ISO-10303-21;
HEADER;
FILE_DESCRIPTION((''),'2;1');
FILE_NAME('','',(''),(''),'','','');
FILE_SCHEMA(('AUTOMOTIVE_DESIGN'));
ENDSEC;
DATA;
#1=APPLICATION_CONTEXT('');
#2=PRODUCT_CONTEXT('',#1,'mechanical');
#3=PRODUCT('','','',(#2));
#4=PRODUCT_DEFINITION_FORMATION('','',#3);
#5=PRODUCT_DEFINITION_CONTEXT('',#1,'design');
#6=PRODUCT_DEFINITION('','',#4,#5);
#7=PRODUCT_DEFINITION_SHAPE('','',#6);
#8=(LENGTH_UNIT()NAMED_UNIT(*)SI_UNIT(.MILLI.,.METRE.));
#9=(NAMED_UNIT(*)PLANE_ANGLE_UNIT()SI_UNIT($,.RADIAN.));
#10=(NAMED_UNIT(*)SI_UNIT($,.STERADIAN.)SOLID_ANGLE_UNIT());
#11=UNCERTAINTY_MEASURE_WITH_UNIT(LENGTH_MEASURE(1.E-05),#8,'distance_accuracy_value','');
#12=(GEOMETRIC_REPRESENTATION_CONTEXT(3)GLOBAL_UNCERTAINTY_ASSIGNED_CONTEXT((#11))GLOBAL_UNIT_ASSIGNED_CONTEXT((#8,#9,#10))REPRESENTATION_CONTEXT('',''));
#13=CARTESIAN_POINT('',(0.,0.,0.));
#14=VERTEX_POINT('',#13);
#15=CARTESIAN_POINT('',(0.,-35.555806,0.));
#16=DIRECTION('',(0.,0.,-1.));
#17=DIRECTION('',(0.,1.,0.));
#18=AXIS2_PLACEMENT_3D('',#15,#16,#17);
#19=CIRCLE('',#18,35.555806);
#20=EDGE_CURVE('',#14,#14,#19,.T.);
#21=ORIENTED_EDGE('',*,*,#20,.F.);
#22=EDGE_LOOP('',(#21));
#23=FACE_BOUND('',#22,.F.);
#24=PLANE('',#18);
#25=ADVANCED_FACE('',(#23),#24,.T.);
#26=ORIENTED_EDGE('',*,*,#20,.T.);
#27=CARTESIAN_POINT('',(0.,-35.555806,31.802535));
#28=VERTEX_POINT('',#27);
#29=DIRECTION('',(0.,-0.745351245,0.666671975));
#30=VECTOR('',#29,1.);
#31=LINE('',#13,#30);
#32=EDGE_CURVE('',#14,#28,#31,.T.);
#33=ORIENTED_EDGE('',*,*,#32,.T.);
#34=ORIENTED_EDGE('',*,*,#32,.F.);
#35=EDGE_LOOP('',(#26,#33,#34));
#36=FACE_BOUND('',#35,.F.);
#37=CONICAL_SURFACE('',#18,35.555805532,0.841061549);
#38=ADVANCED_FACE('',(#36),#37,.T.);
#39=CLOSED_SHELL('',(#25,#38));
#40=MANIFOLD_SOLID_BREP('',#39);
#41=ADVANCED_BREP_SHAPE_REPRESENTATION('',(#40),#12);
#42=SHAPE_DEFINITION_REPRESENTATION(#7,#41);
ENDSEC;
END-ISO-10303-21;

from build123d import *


# Not quite as in the source:
# - the program builds the solid bodies; features that only make, move or delete a surface that nothing else refers to are left out


with BuildPart() as f1:
    # F0 (on Right) → F1 (revolve)
    with BuildSketch(Plane.YZ):
        Polygon((0, 0), (-35.5558055322, 31.8025350571), (-35.5558055322, 0), align=None)
    revolve(axis=Axis((0, -35.5558055322, 15.9012675285), (0, 0, -1)))


solid = f1.part
